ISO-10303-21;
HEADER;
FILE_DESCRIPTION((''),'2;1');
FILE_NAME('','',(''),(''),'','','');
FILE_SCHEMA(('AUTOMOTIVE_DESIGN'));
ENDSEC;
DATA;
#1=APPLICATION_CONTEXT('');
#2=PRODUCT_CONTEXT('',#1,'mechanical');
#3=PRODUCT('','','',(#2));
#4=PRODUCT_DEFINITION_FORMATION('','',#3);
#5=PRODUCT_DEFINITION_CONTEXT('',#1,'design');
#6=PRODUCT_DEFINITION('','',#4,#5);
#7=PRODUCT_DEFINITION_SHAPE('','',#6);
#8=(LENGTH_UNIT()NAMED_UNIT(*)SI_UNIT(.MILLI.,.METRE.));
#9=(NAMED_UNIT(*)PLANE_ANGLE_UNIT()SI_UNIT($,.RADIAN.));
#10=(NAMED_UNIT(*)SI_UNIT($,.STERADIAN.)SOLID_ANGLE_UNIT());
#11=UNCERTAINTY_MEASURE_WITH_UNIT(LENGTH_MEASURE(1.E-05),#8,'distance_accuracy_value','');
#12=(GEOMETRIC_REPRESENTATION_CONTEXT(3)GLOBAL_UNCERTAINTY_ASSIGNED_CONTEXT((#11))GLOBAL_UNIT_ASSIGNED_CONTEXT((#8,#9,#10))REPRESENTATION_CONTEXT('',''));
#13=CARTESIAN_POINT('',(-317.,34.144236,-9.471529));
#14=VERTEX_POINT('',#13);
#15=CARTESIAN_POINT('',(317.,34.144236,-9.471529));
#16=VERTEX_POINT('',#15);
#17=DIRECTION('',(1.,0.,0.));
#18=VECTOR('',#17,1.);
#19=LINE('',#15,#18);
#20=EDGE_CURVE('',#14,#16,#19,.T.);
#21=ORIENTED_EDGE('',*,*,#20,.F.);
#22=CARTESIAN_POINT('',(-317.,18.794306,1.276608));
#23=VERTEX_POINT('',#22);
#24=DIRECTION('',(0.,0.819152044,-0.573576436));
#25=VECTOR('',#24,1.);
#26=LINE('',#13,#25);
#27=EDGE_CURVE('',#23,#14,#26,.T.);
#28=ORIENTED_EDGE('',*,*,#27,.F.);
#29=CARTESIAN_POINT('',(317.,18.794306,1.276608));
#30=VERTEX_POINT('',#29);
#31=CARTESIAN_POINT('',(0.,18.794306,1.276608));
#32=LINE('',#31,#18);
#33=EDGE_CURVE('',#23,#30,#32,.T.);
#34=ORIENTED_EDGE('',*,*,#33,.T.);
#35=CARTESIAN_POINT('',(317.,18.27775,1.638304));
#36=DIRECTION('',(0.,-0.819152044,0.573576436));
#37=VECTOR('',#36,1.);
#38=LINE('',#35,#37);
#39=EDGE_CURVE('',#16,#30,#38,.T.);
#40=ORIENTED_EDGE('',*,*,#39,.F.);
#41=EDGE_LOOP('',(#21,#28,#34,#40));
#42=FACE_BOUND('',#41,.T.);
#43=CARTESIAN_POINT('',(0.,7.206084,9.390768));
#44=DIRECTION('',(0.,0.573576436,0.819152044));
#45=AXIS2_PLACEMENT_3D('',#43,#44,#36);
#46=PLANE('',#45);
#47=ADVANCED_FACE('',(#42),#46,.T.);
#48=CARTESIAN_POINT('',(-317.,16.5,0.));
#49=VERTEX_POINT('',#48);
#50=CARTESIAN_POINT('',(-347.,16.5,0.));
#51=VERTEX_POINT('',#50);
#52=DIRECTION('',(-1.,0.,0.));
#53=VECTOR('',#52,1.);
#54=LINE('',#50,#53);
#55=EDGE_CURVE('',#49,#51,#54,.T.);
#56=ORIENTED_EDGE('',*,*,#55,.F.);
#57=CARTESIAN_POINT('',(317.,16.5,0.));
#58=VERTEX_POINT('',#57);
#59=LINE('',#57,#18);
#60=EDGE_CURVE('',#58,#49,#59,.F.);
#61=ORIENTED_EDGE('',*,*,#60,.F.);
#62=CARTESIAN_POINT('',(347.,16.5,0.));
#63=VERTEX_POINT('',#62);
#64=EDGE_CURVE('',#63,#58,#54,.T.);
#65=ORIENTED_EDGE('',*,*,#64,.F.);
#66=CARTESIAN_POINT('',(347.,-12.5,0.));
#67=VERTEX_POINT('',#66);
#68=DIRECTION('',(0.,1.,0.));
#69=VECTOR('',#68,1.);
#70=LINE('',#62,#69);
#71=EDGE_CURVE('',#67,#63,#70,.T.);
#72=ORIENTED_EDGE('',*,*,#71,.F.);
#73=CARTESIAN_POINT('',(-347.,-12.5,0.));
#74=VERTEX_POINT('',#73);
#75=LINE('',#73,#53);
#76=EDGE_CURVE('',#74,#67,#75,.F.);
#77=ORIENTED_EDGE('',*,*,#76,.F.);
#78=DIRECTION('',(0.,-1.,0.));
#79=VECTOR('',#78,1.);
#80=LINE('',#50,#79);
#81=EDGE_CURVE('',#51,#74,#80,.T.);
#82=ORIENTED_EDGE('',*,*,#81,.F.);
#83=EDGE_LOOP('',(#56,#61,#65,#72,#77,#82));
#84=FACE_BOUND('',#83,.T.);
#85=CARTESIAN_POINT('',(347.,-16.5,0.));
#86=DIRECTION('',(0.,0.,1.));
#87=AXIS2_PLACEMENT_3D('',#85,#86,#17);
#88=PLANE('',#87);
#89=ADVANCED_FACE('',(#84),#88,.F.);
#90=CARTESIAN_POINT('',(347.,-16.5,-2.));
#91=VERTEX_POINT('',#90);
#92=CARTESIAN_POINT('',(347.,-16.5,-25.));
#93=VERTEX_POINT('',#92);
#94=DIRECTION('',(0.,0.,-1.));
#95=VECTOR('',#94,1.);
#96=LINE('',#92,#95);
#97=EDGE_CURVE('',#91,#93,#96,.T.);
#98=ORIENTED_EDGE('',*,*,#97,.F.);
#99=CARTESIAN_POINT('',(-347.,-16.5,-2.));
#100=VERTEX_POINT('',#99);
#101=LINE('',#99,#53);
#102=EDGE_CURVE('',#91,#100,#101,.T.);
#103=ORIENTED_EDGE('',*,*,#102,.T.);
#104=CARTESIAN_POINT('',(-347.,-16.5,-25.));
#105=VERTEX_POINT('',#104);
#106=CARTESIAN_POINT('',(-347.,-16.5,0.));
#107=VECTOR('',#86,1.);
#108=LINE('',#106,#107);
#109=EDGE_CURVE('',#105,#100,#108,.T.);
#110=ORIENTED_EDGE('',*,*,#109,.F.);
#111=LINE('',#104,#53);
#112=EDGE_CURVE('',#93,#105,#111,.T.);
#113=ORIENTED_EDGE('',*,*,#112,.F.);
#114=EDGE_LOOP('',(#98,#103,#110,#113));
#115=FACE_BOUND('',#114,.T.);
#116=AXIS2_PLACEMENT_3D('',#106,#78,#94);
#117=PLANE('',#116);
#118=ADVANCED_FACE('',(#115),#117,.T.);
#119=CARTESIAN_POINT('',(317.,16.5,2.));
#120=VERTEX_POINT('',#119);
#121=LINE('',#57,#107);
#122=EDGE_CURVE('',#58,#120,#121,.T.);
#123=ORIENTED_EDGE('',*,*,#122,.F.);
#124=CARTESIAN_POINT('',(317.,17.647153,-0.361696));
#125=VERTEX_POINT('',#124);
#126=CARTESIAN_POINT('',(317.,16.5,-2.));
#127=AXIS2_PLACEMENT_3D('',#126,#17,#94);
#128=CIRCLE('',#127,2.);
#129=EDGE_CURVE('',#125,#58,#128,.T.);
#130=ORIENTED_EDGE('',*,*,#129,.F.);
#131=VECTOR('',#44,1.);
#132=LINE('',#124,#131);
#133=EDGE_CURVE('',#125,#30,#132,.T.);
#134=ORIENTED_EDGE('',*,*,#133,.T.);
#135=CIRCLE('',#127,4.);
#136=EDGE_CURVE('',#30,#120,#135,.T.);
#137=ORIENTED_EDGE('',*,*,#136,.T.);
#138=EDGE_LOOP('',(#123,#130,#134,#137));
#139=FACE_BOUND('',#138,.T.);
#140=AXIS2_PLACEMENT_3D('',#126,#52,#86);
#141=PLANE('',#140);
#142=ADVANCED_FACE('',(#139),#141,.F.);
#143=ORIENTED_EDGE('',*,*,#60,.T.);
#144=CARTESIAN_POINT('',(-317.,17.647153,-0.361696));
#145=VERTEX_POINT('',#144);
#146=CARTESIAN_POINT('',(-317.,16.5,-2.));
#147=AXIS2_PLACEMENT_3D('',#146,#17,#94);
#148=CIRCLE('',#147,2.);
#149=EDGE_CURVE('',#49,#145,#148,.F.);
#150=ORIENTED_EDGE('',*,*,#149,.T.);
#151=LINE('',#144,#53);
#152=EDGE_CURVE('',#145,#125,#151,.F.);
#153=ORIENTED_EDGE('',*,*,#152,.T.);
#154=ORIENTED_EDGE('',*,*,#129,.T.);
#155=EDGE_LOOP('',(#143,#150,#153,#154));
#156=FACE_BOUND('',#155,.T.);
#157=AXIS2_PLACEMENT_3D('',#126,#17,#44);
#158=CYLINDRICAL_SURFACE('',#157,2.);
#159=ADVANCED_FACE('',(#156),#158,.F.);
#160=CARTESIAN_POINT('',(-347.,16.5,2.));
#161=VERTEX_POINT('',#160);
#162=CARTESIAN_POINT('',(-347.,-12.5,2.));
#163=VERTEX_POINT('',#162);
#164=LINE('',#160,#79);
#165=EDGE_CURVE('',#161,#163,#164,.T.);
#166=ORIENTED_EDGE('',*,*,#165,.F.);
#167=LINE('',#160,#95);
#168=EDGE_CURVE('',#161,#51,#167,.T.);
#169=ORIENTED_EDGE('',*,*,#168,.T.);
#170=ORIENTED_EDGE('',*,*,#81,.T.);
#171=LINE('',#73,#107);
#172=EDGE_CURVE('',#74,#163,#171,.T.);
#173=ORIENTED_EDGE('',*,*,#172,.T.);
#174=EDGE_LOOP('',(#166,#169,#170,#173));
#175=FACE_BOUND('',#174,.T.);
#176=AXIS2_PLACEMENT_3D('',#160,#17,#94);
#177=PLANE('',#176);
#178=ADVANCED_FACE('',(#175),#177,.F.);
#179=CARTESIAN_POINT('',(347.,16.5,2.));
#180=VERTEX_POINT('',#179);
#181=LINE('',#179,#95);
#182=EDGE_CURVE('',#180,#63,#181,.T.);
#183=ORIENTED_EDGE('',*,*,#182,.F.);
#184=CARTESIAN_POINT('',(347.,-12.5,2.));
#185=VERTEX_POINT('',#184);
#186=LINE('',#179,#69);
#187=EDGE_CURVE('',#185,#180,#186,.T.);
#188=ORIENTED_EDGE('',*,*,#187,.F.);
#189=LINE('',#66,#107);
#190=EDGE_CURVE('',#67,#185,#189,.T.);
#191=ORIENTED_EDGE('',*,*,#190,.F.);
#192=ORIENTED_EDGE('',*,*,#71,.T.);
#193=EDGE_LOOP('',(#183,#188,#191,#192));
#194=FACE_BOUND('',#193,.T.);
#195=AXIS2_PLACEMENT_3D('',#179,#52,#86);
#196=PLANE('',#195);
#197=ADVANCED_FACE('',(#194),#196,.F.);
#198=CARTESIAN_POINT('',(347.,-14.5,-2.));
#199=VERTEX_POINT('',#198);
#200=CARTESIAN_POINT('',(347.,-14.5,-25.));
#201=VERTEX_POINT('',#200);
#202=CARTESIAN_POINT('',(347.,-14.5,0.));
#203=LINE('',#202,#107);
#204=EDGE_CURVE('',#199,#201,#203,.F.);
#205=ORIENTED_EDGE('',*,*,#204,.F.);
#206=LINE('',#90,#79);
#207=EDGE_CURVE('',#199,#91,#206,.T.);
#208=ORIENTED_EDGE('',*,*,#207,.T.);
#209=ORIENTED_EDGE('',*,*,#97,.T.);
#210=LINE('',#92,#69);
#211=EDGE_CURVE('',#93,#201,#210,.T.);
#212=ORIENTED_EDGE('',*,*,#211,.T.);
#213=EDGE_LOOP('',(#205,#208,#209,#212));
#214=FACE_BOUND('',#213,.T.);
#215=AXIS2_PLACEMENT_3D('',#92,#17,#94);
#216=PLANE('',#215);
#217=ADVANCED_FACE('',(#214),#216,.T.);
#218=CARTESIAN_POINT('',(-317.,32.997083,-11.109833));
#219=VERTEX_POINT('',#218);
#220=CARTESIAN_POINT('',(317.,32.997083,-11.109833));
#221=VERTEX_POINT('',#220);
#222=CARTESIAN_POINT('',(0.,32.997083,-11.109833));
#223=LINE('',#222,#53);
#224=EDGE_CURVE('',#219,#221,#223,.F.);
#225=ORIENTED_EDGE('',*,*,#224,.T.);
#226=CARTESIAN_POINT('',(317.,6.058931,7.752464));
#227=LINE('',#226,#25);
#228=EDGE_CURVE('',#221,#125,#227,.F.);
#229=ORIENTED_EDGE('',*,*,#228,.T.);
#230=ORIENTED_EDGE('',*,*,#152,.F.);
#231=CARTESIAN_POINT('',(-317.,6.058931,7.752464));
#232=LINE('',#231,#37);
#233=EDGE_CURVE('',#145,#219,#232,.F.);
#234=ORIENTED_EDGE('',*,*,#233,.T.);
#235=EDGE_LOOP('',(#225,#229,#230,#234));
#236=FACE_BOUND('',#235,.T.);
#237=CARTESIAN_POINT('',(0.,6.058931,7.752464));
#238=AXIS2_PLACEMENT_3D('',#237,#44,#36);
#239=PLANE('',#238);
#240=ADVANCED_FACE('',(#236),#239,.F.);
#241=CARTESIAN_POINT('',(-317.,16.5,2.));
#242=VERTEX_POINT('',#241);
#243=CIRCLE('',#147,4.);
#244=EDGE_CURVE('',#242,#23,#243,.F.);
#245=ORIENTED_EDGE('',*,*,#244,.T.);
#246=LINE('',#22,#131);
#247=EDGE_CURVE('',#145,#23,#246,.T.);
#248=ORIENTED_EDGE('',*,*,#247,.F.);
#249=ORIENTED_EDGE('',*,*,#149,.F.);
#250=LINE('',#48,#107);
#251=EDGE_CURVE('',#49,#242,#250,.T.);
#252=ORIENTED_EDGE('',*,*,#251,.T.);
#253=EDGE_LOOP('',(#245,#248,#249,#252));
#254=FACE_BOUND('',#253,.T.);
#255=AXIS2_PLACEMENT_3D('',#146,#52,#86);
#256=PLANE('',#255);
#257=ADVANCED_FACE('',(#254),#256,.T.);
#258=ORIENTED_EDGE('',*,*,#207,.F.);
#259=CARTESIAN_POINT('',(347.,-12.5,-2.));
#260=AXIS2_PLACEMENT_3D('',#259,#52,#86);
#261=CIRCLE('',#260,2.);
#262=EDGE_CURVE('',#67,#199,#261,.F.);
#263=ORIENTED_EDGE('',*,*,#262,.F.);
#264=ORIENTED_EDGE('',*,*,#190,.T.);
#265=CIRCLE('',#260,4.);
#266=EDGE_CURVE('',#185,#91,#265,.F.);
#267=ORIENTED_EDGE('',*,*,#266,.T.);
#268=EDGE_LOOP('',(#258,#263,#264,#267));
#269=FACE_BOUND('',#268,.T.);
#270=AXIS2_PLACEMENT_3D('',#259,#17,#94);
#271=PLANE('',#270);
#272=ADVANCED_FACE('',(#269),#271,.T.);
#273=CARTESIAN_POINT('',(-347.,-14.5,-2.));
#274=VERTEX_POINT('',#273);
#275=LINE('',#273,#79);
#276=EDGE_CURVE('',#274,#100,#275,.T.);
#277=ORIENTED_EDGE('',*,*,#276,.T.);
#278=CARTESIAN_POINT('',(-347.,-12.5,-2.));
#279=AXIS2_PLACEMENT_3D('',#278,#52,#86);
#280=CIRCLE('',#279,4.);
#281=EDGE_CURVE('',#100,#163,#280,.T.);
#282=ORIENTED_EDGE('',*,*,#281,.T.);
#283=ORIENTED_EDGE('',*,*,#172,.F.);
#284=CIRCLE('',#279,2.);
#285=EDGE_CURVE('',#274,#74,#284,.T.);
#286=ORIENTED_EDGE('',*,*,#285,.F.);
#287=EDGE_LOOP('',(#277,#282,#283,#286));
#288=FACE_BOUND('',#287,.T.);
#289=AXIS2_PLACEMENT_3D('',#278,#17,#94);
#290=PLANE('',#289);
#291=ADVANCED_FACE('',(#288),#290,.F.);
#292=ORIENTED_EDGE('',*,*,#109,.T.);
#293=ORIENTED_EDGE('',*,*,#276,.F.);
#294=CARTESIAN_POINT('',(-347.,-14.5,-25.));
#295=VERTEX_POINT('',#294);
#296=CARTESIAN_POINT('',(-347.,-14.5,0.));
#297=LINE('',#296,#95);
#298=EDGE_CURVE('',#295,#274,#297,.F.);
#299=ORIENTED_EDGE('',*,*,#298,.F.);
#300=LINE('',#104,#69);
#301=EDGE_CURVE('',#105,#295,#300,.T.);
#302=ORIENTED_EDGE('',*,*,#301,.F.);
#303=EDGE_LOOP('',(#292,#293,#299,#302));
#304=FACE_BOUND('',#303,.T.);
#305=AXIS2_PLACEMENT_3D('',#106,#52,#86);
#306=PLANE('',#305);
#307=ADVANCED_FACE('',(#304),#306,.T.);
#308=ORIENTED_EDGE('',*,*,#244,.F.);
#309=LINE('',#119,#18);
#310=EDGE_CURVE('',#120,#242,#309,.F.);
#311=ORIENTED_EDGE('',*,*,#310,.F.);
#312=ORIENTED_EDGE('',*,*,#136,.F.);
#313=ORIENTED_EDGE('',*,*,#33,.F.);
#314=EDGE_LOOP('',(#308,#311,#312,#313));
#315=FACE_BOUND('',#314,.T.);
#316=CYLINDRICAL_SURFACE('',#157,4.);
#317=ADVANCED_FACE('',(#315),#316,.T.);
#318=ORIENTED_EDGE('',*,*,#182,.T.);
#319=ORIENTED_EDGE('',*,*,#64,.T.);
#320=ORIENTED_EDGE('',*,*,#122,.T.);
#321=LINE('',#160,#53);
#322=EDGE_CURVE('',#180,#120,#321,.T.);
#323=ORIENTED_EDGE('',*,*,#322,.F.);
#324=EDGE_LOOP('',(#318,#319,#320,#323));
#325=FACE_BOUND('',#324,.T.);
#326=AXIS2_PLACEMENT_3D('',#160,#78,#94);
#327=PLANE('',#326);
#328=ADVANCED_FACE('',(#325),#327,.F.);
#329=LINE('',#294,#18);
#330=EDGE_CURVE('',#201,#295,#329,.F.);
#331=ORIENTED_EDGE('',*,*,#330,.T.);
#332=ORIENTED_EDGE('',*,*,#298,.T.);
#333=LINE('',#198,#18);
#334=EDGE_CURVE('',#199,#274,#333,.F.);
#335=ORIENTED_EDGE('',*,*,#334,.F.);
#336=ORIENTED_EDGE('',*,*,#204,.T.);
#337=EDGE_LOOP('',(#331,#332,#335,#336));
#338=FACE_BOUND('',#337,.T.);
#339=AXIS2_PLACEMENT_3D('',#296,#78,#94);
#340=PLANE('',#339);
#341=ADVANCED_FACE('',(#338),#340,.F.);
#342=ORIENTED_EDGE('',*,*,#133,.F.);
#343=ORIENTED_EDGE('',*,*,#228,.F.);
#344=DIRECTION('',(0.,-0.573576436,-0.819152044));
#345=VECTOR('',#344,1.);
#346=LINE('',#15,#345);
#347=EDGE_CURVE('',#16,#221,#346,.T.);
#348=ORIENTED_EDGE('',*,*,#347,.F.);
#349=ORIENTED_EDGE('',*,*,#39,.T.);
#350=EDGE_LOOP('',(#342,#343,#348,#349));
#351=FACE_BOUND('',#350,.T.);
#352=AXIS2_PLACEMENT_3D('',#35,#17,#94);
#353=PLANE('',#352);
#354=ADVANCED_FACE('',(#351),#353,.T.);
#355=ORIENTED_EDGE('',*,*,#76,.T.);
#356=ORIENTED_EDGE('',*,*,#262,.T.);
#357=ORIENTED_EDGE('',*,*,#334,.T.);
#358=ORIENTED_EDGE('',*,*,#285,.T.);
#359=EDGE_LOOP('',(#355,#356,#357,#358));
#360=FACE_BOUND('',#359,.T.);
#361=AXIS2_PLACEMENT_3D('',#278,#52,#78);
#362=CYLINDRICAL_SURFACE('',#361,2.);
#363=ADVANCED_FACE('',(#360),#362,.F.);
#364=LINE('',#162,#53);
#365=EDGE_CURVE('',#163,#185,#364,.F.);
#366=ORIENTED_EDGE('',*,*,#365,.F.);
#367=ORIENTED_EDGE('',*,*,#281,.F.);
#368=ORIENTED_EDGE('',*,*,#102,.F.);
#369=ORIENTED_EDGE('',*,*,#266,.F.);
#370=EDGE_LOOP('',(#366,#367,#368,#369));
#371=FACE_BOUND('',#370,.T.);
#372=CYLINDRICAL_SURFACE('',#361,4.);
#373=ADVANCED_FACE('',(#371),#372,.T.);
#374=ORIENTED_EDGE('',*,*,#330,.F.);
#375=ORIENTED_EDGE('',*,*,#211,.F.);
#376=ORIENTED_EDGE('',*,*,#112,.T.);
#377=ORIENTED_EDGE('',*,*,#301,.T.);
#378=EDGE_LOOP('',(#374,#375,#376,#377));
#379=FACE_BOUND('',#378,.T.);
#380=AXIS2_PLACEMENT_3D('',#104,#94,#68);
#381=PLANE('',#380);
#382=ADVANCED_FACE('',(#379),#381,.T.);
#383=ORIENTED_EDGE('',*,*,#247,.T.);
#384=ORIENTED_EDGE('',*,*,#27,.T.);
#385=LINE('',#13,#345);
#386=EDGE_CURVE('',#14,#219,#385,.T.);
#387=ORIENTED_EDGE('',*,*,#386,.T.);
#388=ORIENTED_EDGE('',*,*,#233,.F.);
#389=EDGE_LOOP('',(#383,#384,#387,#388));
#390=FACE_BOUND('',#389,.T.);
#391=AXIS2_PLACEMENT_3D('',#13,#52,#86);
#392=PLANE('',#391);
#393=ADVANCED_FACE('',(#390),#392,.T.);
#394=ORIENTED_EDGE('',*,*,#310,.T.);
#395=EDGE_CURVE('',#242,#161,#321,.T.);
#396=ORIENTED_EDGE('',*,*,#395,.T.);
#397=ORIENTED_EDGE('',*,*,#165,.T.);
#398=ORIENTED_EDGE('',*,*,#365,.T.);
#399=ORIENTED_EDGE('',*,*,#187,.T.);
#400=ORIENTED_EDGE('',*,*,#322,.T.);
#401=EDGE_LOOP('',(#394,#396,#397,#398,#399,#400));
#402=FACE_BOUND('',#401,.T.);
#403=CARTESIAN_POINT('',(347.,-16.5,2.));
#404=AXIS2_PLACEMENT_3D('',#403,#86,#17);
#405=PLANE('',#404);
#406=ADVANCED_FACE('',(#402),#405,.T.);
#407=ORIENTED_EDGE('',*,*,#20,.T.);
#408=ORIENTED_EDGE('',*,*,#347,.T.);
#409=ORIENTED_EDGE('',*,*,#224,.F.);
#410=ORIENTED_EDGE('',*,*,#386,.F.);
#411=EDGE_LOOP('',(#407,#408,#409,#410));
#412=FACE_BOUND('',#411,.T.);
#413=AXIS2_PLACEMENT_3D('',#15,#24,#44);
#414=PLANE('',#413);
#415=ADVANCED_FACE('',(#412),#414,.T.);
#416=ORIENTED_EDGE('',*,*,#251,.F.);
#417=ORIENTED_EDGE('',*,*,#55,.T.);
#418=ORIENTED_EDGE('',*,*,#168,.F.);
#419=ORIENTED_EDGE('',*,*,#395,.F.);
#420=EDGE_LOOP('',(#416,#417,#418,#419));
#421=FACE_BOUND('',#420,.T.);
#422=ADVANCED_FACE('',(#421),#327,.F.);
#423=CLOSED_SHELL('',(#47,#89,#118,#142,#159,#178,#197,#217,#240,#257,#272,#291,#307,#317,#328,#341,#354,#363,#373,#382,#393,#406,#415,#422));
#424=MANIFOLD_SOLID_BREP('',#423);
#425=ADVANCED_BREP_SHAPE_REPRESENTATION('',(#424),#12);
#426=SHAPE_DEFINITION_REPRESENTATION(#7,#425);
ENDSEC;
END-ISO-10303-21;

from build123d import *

# Parameters (mm, degrees)
SKETCH1_W                    = 694
SKETCH1_H                    = 33
BASE_FLANGE1_DEPTH           = 2
EDGE_FLANGE1_STRIP_W         = 12
EDGE_FLANGE1_STRIP_H         = 2
EDGE_FLANGE1_STRIP_CUT_DEPTH = 694
EDGE_FLANGE1_DEPTH           = 694
EDGE_FLANGE2_DEPTH           = 634


# Sheet-metal steps are written as plain solids
with BuildPart() as part:
    # Sketch1 → Base-Flange1 (new body)
    with BuildSketch(Plane.XY):
        Rectangle(SKETCH1_W, SKETCH1_H)
    extrude(amount=BASE_FLANGE1_DEPTH)

    # Edge-Flange1 strip (across the edge) → Edge-Flange1 strip cut (cut)
    with BuildSketch(Plane(origin=(347, -16.5, 0), x_dir=(0, 1, 0), z_dir=(-1, 0, 0))):
        with Locations((-2, -1)):
            Rectangle(EDGE_FLANGE1_STRIP_W, EDGE_FLANGE1_STRIP_H)
    extrude(amount=EDGE_FLANGE1_STRIP_CUT_DEPTH, mode=Mode.SUBTRACT)

    # Edge-Flange1 section (across the edge) → Edge-Flange1 (add)
    with BuildSketch(Plane(origin=(347, -16.5, 0), x_dir=(0, 1, 0), z_dir=(-1, 0, 0))):
        with BuildLine():
            Line((0, 2), (0, 25))
            Line((0, 25), (2, 25))
            Line((2, 25), (2, 2))
            ThreePointArc((2, 2), (2.585786438, 0.585786438), (4, 0))
            Line((4, 0), (4, -2))
            ThreePointArc((4, -2), (1.171572875, -0.828427125), (0, 2))
        make_face()
    extrude(amount=EDGE_FLANGE1_DEPTH)

    # Edge-Flange2 section (across the edge) → Edge-Flange2 (add)
    with BuildSketch(Plane(origin=(-317, 17.130597578, 0), x_dir=(0, -0.5735764363510416, -0.8191520442889949), z_dir=(1, 0, 0))):
        with BuildLine():
            Line((-2, 0.630597578), (-2, 19.369402422))
            Line((-2, 19.369402422), (0, 19.369402422))
            Line((0, 19.369402422), (0, 0.630597578))
            ThreePointArc((0, 0.630597578), (0.092566099, 0.029185979), (0.361695911, -0.516555295))
            Line((0.361695911, -0.516555295), (-1.276608177, -1.663708168))
            ThreePointArc((-1.276608177, -1.663708168), (-1.814867803, -0.57222562), (-2, 0.630597578))
        make_face()
    extrude(amount=EDGE_FLANGE2_DEPTH)


solid = part.part
